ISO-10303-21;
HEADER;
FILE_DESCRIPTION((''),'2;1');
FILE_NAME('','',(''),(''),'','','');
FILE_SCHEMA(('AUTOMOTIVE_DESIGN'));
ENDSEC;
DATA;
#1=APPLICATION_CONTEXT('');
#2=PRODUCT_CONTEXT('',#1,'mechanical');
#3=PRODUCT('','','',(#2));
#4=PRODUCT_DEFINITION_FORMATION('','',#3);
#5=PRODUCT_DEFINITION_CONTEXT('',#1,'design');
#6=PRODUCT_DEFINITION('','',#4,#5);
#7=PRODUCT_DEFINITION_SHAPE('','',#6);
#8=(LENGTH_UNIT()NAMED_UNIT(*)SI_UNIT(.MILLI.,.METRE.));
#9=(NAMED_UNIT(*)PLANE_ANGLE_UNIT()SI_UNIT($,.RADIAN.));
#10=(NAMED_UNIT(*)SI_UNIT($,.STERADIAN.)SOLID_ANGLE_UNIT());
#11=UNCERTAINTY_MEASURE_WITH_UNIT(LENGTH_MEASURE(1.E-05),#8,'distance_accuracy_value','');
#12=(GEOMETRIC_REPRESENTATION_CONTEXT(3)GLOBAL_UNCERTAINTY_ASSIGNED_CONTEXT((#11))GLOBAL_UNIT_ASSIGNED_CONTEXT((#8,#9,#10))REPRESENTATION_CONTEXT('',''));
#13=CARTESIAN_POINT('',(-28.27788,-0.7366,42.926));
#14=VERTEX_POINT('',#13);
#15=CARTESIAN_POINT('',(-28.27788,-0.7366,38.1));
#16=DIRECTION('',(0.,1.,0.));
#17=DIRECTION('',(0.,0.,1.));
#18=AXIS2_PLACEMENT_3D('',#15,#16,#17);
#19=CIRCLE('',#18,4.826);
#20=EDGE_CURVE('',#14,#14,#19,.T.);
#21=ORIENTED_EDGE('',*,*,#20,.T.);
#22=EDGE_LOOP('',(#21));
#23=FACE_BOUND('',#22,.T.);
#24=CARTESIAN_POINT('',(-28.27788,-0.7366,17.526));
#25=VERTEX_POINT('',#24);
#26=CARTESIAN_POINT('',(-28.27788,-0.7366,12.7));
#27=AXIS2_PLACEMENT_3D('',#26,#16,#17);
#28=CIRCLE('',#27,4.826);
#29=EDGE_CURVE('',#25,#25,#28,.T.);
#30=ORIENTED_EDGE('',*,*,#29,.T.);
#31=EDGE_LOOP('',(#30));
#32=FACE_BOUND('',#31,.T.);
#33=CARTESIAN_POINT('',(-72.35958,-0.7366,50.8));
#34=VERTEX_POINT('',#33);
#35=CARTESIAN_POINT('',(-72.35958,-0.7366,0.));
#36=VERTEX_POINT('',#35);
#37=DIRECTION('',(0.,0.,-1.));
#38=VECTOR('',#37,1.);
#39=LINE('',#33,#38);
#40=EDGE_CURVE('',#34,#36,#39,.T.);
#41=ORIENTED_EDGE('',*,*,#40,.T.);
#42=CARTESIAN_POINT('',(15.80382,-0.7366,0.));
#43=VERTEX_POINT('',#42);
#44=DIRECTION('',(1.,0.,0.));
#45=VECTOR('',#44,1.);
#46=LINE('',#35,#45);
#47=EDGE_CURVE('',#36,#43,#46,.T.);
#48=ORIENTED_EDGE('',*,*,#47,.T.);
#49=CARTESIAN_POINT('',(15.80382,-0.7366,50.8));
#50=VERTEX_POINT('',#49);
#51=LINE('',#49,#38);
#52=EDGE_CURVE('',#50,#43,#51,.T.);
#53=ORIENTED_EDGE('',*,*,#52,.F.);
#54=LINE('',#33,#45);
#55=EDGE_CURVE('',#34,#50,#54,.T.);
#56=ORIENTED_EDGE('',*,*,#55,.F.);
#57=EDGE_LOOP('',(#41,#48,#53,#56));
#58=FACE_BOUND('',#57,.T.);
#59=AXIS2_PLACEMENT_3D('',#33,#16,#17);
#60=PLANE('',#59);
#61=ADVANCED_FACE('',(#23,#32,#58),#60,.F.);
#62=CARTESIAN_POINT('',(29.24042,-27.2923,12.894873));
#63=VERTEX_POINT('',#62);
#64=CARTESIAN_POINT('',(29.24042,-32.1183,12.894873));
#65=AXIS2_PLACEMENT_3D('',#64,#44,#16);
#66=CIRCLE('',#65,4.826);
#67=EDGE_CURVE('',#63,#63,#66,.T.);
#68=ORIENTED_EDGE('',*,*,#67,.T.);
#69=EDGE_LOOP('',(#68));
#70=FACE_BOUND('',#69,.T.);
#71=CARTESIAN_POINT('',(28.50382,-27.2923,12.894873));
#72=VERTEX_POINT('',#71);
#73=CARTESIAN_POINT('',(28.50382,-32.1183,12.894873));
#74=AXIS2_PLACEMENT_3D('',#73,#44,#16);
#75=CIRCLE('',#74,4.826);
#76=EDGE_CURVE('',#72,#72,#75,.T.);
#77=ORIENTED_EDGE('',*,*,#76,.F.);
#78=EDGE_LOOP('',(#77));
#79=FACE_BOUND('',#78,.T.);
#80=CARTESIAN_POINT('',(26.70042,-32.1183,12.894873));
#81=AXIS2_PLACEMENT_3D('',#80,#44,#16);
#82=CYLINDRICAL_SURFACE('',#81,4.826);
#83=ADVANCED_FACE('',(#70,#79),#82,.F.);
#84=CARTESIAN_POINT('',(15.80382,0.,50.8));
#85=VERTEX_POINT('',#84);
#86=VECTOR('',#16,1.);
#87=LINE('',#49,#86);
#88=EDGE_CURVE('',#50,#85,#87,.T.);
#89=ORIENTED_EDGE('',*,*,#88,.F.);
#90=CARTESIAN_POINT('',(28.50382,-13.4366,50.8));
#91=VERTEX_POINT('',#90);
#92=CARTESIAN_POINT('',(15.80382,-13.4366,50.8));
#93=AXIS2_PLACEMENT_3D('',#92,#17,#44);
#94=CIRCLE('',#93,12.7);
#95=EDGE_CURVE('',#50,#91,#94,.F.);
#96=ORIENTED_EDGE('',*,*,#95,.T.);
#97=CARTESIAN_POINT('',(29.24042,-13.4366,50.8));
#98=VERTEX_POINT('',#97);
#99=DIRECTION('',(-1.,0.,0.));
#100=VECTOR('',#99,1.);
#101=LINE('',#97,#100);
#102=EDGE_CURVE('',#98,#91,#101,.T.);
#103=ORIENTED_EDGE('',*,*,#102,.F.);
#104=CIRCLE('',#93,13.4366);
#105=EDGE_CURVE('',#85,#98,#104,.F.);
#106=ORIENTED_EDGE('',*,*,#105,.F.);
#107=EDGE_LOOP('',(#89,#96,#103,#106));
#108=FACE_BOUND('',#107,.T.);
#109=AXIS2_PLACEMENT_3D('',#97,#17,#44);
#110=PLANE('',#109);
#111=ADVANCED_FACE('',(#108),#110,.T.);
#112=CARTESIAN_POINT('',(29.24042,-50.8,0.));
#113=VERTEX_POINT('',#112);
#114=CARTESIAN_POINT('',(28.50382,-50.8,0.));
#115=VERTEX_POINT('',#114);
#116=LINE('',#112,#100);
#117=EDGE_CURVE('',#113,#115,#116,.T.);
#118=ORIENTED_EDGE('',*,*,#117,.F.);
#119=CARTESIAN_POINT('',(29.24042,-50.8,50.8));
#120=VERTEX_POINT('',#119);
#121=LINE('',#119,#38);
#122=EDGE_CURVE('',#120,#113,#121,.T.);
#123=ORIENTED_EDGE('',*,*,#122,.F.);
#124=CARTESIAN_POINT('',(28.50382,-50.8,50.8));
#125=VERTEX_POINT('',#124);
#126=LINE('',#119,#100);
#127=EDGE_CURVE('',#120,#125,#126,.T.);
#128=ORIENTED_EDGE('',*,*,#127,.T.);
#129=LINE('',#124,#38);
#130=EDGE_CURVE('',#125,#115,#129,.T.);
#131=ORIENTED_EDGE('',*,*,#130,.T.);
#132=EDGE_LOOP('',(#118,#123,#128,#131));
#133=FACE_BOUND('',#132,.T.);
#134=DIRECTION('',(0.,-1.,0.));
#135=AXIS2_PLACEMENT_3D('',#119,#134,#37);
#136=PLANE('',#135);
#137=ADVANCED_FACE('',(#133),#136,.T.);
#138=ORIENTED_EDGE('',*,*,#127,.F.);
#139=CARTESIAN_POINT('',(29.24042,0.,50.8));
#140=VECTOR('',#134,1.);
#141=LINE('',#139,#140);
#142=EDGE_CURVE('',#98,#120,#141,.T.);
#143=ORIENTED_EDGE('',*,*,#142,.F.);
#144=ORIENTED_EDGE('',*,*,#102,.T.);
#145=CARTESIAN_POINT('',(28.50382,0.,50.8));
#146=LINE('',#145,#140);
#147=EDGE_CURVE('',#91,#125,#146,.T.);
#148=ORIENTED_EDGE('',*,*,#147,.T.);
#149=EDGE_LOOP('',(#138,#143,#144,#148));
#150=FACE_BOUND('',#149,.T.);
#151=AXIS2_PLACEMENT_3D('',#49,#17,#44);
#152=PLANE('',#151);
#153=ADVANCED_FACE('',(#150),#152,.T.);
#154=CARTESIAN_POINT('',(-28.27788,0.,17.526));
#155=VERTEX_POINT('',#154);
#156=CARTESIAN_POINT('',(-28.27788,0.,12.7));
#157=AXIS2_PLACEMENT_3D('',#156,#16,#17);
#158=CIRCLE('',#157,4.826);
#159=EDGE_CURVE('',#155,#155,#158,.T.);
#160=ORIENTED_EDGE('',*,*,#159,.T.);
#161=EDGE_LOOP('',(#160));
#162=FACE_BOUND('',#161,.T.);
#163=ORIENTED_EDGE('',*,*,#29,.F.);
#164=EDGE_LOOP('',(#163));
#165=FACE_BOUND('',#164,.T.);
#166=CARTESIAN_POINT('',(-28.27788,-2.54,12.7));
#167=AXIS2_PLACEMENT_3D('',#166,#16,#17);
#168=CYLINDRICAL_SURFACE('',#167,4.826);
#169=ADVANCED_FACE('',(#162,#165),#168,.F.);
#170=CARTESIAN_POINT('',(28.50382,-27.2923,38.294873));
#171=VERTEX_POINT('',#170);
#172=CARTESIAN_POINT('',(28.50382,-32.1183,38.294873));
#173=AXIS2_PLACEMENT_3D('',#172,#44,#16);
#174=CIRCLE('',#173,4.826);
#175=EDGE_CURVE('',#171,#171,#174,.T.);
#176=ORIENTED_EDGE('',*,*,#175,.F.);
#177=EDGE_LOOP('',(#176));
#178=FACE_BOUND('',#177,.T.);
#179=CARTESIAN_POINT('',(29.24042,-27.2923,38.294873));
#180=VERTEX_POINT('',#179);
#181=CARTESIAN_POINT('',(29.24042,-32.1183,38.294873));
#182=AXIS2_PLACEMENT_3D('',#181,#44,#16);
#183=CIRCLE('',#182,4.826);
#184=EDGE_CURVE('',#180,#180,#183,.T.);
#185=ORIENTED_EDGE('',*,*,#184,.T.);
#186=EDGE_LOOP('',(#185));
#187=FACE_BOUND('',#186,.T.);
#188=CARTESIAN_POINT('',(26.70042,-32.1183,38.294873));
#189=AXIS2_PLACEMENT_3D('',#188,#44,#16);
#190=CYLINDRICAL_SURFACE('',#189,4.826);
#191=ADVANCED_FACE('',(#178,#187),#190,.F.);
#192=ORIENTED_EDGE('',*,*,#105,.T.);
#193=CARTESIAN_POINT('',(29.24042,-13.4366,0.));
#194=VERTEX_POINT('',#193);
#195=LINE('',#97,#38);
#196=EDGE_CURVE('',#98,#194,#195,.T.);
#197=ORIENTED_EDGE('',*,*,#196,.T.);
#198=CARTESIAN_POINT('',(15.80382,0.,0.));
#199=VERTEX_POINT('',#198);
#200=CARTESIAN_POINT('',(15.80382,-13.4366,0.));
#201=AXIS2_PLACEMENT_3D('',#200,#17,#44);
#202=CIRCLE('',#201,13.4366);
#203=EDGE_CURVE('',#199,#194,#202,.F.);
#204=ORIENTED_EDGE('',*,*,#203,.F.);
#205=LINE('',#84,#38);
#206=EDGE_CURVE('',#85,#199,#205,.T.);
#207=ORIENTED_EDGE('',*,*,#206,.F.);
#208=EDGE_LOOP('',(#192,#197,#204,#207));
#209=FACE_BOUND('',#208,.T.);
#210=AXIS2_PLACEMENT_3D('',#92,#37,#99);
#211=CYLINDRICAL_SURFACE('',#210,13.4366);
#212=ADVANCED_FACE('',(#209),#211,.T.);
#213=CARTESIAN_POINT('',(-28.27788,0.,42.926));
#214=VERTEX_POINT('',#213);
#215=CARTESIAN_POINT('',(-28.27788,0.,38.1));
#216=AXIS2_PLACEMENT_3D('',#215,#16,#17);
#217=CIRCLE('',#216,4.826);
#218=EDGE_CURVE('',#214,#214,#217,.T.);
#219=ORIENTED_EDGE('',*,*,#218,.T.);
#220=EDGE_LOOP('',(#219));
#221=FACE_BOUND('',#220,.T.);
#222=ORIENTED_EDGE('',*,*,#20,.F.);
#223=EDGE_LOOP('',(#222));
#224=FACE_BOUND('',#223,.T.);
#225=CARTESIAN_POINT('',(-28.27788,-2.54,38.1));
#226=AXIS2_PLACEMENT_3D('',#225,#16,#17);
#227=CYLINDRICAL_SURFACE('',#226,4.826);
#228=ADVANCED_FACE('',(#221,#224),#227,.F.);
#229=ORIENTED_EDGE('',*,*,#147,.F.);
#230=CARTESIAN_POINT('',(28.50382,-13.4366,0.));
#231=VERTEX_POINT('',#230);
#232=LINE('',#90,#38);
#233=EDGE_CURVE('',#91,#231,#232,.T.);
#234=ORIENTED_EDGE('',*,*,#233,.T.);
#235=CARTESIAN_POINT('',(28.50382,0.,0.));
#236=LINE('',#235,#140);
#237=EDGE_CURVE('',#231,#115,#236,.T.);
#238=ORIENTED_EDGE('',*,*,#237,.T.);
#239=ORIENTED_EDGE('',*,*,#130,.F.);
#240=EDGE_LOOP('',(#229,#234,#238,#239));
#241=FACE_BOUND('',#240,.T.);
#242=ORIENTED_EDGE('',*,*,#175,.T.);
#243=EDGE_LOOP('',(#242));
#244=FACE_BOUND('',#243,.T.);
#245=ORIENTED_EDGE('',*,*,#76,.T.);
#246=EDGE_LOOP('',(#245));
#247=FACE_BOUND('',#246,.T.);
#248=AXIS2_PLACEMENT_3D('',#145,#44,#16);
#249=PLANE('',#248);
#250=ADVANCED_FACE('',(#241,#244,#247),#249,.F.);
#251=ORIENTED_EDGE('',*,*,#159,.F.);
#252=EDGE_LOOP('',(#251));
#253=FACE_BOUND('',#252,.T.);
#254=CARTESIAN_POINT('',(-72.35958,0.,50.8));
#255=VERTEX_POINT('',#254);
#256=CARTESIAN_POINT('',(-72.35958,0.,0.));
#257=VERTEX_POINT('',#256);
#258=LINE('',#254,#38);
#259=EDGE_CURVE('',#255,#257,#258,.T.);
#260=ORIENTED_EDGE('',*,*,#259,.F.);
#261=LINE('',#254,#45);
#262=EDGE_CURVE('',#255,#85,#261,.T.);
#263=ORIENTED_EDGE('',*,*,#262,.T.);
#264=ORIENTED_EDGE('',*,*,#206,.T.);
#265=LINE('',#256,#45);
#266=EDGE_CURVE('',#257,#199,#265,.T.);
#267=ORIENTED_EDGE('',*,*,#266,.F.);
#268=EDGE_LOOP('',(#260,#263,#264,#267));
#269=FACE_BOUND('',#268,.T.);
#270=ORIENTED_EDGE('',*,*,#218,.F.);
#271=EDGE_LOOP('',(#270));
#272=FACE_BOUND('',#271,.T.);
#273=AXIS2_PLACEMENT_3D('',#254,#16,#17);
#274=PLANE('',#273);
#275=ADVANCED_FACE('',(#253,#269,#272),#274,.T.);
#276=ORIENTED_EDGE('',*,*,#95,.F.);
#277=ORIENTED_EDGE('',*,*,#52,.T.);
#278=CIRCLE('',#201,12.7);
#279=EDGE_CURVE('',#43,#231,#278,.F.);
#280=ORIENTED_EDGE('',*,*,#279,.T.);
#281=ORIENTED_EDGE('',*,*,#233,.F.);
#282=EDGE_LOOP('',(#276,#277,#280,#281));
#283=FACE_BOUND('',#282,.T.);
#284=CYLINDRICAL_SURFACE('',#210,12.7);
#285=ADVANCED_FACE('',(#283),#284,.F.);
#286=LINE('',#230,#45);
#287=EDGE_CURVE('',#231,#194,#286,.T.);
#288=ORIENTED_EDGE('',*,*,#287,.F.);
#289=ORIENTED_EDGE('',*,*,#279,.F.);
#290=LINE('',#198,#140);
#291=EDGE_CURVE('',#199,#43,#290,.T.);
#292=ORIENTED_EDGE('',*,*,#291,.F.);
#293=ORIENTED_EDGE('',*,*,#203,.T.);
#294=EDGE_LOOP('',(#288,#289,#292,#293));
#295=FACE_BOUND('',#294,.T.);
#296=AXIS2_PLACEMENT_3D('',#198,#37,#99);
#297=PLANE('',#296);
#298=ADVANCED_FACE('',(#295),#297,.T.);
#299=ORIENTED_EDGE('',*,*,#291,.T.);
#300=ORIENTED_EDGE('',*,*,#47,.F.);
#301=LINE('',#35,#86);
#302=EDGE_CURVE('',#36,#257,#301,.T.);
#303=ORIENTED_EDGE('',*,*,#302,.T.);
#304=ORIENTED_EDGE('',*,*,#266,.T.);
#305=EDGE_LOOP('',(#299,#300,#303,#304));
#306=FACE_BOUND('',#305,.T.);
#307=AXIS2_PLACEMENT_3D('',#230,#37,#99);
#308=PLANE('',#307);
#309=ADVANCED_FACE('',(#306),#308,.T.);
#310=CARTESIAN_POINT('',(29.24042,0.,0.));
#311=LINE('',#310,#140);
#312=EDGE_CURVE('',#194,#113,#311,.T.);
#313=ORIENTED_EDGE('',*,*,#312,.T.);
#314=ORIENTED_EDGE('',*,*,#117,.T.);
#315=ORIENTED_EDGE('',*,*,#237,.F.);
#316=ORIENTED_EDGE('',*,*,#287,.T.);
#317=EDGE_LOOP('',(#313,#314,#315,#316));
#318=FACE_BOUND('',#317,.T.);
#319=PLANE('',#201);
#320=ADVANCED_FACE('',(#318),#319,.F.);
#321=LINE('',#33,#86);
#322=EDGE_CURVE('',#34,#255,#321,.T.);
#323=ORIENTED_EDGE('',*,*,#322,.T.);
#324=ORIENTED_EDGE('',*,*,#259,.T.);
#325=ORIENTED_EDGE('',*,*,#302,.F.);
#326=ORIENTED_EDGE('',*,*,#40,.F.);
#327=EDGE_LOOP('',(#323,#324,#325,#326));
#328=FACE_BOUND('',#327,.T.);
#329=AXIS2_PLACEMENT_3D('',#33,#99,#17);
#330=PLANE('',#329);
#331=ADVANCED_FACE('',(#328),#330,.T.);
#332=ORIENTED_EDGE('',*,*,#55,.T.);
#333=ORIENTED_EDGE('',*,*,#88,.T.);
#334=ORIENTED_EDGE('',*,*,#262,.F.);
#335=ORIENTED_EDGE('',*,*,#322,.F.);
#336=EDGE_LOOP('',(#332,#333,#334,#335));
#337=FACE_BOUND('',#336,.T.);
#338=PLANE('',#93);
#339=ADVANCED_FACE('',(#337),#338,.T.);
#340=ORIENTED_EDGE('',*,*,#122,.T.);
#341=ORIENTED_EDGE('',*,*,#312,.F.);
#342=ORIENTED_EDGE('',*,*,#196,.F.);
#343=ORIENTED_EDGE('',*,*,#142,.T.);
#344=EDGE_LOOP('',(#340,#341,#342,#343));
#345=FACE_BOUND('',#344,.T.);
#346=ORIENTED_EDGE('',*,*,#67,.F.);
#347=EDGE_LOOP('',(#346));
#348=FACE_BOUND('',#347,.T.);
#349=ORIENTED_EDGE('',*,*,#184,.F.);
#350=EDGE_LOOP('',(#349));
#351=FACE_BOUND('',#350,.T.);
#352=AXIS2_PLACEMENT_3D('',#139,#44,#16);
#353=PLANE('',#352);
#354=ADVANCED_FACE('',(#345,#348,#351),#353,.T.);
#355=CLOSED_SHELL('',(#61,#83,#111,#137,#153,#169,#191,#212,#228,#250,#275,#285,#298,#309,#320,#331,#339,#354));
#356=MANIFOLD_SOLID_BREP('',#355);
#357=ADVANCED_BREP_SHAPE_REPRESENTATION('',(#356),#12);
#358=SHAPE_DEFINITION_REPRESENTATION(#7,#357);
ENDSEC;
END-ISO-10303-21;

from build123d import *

# Parameters (mm, degrees)
BASE_FLANGE1_DEPTH = 50.8
SKETCH7_R          = 4.826
CUT_EXTRUDE1_DEPTH = 2.54
SKETCH8_R          = 4.826
CUT_EXTRUDE2_DEPTH = 2.54


# Sheet-metal steps are written as plain solids
with BuildPart() as part:
    # Sketch2 → Base-Flange1 (new body)
    with BuildSketch(Plane.XY):
        with BuildLine():
            Line((-72.359580073, 0), (15.803819927, 0))
            ThreePointArc((15.803819927, 0), (25.304930904, -3.935489024), (29.240419927, -13.4366))
            Line((29.240419927, -13.4366), (29.240419927, -50.8))
            Line((29.240419927, -50.8), (28.503819927, -50.8))
            Line((28.503819927, -50.8), (28.503819927, -13.4366))
            ThreePointArc((28.503819927, -13.4366), (24.784076049, -4.456343879), (15.803819927, -0.7366))
            Line((15.803819927, -0.7366), (-72.359580073, -0.7366))
            Line((-72.359580073, -0.7366), (-72.359580073, 0))
        make_face()
    extrude(amount=BASE_FLANGE1_DEPTH)

    # Sketch7 → Cut-Extrude1 (cut)
    with BuildSketch(Plane(origin=(29.240419927, 0, 0), x_dir=(0, 0, -1), z_dir=(1, 0, 0))):
        with Locations(Location((-12.894872644, -32.1183, 0), (0, 0, 90))):
            Circle(SKETCH7_R)
        with Locations(Location((-38.294872644, -32.1183, 0), (0, 0, 90))):
            Circle(SKETCH7_R)
    extrude(amount=-CUT_EXTRUDE1_DEPTH, mode=Mode.SUBTRACT)

    # Sketch8 → Cut-Extrude2 (cut)
    with BuildSketch(Plane(origin=(0, 0, 0), x_dir=(1, 0, 0), z_dir=(0, 1, 0))):
        with Locations(Location((-28.277880073, -38.1, 0), (0, 0, 270))):
            Circle(SKETCH8_R)
        with Locations(Location((-28.277880073, -12.7, 0), (0, 0, 270))):
            Circle(SKETCH8_R)
    extrude(amount=-CUT_EXTRUDE2_DEPTH, mode=Mode.SUBTRACT)


solid = part.part
